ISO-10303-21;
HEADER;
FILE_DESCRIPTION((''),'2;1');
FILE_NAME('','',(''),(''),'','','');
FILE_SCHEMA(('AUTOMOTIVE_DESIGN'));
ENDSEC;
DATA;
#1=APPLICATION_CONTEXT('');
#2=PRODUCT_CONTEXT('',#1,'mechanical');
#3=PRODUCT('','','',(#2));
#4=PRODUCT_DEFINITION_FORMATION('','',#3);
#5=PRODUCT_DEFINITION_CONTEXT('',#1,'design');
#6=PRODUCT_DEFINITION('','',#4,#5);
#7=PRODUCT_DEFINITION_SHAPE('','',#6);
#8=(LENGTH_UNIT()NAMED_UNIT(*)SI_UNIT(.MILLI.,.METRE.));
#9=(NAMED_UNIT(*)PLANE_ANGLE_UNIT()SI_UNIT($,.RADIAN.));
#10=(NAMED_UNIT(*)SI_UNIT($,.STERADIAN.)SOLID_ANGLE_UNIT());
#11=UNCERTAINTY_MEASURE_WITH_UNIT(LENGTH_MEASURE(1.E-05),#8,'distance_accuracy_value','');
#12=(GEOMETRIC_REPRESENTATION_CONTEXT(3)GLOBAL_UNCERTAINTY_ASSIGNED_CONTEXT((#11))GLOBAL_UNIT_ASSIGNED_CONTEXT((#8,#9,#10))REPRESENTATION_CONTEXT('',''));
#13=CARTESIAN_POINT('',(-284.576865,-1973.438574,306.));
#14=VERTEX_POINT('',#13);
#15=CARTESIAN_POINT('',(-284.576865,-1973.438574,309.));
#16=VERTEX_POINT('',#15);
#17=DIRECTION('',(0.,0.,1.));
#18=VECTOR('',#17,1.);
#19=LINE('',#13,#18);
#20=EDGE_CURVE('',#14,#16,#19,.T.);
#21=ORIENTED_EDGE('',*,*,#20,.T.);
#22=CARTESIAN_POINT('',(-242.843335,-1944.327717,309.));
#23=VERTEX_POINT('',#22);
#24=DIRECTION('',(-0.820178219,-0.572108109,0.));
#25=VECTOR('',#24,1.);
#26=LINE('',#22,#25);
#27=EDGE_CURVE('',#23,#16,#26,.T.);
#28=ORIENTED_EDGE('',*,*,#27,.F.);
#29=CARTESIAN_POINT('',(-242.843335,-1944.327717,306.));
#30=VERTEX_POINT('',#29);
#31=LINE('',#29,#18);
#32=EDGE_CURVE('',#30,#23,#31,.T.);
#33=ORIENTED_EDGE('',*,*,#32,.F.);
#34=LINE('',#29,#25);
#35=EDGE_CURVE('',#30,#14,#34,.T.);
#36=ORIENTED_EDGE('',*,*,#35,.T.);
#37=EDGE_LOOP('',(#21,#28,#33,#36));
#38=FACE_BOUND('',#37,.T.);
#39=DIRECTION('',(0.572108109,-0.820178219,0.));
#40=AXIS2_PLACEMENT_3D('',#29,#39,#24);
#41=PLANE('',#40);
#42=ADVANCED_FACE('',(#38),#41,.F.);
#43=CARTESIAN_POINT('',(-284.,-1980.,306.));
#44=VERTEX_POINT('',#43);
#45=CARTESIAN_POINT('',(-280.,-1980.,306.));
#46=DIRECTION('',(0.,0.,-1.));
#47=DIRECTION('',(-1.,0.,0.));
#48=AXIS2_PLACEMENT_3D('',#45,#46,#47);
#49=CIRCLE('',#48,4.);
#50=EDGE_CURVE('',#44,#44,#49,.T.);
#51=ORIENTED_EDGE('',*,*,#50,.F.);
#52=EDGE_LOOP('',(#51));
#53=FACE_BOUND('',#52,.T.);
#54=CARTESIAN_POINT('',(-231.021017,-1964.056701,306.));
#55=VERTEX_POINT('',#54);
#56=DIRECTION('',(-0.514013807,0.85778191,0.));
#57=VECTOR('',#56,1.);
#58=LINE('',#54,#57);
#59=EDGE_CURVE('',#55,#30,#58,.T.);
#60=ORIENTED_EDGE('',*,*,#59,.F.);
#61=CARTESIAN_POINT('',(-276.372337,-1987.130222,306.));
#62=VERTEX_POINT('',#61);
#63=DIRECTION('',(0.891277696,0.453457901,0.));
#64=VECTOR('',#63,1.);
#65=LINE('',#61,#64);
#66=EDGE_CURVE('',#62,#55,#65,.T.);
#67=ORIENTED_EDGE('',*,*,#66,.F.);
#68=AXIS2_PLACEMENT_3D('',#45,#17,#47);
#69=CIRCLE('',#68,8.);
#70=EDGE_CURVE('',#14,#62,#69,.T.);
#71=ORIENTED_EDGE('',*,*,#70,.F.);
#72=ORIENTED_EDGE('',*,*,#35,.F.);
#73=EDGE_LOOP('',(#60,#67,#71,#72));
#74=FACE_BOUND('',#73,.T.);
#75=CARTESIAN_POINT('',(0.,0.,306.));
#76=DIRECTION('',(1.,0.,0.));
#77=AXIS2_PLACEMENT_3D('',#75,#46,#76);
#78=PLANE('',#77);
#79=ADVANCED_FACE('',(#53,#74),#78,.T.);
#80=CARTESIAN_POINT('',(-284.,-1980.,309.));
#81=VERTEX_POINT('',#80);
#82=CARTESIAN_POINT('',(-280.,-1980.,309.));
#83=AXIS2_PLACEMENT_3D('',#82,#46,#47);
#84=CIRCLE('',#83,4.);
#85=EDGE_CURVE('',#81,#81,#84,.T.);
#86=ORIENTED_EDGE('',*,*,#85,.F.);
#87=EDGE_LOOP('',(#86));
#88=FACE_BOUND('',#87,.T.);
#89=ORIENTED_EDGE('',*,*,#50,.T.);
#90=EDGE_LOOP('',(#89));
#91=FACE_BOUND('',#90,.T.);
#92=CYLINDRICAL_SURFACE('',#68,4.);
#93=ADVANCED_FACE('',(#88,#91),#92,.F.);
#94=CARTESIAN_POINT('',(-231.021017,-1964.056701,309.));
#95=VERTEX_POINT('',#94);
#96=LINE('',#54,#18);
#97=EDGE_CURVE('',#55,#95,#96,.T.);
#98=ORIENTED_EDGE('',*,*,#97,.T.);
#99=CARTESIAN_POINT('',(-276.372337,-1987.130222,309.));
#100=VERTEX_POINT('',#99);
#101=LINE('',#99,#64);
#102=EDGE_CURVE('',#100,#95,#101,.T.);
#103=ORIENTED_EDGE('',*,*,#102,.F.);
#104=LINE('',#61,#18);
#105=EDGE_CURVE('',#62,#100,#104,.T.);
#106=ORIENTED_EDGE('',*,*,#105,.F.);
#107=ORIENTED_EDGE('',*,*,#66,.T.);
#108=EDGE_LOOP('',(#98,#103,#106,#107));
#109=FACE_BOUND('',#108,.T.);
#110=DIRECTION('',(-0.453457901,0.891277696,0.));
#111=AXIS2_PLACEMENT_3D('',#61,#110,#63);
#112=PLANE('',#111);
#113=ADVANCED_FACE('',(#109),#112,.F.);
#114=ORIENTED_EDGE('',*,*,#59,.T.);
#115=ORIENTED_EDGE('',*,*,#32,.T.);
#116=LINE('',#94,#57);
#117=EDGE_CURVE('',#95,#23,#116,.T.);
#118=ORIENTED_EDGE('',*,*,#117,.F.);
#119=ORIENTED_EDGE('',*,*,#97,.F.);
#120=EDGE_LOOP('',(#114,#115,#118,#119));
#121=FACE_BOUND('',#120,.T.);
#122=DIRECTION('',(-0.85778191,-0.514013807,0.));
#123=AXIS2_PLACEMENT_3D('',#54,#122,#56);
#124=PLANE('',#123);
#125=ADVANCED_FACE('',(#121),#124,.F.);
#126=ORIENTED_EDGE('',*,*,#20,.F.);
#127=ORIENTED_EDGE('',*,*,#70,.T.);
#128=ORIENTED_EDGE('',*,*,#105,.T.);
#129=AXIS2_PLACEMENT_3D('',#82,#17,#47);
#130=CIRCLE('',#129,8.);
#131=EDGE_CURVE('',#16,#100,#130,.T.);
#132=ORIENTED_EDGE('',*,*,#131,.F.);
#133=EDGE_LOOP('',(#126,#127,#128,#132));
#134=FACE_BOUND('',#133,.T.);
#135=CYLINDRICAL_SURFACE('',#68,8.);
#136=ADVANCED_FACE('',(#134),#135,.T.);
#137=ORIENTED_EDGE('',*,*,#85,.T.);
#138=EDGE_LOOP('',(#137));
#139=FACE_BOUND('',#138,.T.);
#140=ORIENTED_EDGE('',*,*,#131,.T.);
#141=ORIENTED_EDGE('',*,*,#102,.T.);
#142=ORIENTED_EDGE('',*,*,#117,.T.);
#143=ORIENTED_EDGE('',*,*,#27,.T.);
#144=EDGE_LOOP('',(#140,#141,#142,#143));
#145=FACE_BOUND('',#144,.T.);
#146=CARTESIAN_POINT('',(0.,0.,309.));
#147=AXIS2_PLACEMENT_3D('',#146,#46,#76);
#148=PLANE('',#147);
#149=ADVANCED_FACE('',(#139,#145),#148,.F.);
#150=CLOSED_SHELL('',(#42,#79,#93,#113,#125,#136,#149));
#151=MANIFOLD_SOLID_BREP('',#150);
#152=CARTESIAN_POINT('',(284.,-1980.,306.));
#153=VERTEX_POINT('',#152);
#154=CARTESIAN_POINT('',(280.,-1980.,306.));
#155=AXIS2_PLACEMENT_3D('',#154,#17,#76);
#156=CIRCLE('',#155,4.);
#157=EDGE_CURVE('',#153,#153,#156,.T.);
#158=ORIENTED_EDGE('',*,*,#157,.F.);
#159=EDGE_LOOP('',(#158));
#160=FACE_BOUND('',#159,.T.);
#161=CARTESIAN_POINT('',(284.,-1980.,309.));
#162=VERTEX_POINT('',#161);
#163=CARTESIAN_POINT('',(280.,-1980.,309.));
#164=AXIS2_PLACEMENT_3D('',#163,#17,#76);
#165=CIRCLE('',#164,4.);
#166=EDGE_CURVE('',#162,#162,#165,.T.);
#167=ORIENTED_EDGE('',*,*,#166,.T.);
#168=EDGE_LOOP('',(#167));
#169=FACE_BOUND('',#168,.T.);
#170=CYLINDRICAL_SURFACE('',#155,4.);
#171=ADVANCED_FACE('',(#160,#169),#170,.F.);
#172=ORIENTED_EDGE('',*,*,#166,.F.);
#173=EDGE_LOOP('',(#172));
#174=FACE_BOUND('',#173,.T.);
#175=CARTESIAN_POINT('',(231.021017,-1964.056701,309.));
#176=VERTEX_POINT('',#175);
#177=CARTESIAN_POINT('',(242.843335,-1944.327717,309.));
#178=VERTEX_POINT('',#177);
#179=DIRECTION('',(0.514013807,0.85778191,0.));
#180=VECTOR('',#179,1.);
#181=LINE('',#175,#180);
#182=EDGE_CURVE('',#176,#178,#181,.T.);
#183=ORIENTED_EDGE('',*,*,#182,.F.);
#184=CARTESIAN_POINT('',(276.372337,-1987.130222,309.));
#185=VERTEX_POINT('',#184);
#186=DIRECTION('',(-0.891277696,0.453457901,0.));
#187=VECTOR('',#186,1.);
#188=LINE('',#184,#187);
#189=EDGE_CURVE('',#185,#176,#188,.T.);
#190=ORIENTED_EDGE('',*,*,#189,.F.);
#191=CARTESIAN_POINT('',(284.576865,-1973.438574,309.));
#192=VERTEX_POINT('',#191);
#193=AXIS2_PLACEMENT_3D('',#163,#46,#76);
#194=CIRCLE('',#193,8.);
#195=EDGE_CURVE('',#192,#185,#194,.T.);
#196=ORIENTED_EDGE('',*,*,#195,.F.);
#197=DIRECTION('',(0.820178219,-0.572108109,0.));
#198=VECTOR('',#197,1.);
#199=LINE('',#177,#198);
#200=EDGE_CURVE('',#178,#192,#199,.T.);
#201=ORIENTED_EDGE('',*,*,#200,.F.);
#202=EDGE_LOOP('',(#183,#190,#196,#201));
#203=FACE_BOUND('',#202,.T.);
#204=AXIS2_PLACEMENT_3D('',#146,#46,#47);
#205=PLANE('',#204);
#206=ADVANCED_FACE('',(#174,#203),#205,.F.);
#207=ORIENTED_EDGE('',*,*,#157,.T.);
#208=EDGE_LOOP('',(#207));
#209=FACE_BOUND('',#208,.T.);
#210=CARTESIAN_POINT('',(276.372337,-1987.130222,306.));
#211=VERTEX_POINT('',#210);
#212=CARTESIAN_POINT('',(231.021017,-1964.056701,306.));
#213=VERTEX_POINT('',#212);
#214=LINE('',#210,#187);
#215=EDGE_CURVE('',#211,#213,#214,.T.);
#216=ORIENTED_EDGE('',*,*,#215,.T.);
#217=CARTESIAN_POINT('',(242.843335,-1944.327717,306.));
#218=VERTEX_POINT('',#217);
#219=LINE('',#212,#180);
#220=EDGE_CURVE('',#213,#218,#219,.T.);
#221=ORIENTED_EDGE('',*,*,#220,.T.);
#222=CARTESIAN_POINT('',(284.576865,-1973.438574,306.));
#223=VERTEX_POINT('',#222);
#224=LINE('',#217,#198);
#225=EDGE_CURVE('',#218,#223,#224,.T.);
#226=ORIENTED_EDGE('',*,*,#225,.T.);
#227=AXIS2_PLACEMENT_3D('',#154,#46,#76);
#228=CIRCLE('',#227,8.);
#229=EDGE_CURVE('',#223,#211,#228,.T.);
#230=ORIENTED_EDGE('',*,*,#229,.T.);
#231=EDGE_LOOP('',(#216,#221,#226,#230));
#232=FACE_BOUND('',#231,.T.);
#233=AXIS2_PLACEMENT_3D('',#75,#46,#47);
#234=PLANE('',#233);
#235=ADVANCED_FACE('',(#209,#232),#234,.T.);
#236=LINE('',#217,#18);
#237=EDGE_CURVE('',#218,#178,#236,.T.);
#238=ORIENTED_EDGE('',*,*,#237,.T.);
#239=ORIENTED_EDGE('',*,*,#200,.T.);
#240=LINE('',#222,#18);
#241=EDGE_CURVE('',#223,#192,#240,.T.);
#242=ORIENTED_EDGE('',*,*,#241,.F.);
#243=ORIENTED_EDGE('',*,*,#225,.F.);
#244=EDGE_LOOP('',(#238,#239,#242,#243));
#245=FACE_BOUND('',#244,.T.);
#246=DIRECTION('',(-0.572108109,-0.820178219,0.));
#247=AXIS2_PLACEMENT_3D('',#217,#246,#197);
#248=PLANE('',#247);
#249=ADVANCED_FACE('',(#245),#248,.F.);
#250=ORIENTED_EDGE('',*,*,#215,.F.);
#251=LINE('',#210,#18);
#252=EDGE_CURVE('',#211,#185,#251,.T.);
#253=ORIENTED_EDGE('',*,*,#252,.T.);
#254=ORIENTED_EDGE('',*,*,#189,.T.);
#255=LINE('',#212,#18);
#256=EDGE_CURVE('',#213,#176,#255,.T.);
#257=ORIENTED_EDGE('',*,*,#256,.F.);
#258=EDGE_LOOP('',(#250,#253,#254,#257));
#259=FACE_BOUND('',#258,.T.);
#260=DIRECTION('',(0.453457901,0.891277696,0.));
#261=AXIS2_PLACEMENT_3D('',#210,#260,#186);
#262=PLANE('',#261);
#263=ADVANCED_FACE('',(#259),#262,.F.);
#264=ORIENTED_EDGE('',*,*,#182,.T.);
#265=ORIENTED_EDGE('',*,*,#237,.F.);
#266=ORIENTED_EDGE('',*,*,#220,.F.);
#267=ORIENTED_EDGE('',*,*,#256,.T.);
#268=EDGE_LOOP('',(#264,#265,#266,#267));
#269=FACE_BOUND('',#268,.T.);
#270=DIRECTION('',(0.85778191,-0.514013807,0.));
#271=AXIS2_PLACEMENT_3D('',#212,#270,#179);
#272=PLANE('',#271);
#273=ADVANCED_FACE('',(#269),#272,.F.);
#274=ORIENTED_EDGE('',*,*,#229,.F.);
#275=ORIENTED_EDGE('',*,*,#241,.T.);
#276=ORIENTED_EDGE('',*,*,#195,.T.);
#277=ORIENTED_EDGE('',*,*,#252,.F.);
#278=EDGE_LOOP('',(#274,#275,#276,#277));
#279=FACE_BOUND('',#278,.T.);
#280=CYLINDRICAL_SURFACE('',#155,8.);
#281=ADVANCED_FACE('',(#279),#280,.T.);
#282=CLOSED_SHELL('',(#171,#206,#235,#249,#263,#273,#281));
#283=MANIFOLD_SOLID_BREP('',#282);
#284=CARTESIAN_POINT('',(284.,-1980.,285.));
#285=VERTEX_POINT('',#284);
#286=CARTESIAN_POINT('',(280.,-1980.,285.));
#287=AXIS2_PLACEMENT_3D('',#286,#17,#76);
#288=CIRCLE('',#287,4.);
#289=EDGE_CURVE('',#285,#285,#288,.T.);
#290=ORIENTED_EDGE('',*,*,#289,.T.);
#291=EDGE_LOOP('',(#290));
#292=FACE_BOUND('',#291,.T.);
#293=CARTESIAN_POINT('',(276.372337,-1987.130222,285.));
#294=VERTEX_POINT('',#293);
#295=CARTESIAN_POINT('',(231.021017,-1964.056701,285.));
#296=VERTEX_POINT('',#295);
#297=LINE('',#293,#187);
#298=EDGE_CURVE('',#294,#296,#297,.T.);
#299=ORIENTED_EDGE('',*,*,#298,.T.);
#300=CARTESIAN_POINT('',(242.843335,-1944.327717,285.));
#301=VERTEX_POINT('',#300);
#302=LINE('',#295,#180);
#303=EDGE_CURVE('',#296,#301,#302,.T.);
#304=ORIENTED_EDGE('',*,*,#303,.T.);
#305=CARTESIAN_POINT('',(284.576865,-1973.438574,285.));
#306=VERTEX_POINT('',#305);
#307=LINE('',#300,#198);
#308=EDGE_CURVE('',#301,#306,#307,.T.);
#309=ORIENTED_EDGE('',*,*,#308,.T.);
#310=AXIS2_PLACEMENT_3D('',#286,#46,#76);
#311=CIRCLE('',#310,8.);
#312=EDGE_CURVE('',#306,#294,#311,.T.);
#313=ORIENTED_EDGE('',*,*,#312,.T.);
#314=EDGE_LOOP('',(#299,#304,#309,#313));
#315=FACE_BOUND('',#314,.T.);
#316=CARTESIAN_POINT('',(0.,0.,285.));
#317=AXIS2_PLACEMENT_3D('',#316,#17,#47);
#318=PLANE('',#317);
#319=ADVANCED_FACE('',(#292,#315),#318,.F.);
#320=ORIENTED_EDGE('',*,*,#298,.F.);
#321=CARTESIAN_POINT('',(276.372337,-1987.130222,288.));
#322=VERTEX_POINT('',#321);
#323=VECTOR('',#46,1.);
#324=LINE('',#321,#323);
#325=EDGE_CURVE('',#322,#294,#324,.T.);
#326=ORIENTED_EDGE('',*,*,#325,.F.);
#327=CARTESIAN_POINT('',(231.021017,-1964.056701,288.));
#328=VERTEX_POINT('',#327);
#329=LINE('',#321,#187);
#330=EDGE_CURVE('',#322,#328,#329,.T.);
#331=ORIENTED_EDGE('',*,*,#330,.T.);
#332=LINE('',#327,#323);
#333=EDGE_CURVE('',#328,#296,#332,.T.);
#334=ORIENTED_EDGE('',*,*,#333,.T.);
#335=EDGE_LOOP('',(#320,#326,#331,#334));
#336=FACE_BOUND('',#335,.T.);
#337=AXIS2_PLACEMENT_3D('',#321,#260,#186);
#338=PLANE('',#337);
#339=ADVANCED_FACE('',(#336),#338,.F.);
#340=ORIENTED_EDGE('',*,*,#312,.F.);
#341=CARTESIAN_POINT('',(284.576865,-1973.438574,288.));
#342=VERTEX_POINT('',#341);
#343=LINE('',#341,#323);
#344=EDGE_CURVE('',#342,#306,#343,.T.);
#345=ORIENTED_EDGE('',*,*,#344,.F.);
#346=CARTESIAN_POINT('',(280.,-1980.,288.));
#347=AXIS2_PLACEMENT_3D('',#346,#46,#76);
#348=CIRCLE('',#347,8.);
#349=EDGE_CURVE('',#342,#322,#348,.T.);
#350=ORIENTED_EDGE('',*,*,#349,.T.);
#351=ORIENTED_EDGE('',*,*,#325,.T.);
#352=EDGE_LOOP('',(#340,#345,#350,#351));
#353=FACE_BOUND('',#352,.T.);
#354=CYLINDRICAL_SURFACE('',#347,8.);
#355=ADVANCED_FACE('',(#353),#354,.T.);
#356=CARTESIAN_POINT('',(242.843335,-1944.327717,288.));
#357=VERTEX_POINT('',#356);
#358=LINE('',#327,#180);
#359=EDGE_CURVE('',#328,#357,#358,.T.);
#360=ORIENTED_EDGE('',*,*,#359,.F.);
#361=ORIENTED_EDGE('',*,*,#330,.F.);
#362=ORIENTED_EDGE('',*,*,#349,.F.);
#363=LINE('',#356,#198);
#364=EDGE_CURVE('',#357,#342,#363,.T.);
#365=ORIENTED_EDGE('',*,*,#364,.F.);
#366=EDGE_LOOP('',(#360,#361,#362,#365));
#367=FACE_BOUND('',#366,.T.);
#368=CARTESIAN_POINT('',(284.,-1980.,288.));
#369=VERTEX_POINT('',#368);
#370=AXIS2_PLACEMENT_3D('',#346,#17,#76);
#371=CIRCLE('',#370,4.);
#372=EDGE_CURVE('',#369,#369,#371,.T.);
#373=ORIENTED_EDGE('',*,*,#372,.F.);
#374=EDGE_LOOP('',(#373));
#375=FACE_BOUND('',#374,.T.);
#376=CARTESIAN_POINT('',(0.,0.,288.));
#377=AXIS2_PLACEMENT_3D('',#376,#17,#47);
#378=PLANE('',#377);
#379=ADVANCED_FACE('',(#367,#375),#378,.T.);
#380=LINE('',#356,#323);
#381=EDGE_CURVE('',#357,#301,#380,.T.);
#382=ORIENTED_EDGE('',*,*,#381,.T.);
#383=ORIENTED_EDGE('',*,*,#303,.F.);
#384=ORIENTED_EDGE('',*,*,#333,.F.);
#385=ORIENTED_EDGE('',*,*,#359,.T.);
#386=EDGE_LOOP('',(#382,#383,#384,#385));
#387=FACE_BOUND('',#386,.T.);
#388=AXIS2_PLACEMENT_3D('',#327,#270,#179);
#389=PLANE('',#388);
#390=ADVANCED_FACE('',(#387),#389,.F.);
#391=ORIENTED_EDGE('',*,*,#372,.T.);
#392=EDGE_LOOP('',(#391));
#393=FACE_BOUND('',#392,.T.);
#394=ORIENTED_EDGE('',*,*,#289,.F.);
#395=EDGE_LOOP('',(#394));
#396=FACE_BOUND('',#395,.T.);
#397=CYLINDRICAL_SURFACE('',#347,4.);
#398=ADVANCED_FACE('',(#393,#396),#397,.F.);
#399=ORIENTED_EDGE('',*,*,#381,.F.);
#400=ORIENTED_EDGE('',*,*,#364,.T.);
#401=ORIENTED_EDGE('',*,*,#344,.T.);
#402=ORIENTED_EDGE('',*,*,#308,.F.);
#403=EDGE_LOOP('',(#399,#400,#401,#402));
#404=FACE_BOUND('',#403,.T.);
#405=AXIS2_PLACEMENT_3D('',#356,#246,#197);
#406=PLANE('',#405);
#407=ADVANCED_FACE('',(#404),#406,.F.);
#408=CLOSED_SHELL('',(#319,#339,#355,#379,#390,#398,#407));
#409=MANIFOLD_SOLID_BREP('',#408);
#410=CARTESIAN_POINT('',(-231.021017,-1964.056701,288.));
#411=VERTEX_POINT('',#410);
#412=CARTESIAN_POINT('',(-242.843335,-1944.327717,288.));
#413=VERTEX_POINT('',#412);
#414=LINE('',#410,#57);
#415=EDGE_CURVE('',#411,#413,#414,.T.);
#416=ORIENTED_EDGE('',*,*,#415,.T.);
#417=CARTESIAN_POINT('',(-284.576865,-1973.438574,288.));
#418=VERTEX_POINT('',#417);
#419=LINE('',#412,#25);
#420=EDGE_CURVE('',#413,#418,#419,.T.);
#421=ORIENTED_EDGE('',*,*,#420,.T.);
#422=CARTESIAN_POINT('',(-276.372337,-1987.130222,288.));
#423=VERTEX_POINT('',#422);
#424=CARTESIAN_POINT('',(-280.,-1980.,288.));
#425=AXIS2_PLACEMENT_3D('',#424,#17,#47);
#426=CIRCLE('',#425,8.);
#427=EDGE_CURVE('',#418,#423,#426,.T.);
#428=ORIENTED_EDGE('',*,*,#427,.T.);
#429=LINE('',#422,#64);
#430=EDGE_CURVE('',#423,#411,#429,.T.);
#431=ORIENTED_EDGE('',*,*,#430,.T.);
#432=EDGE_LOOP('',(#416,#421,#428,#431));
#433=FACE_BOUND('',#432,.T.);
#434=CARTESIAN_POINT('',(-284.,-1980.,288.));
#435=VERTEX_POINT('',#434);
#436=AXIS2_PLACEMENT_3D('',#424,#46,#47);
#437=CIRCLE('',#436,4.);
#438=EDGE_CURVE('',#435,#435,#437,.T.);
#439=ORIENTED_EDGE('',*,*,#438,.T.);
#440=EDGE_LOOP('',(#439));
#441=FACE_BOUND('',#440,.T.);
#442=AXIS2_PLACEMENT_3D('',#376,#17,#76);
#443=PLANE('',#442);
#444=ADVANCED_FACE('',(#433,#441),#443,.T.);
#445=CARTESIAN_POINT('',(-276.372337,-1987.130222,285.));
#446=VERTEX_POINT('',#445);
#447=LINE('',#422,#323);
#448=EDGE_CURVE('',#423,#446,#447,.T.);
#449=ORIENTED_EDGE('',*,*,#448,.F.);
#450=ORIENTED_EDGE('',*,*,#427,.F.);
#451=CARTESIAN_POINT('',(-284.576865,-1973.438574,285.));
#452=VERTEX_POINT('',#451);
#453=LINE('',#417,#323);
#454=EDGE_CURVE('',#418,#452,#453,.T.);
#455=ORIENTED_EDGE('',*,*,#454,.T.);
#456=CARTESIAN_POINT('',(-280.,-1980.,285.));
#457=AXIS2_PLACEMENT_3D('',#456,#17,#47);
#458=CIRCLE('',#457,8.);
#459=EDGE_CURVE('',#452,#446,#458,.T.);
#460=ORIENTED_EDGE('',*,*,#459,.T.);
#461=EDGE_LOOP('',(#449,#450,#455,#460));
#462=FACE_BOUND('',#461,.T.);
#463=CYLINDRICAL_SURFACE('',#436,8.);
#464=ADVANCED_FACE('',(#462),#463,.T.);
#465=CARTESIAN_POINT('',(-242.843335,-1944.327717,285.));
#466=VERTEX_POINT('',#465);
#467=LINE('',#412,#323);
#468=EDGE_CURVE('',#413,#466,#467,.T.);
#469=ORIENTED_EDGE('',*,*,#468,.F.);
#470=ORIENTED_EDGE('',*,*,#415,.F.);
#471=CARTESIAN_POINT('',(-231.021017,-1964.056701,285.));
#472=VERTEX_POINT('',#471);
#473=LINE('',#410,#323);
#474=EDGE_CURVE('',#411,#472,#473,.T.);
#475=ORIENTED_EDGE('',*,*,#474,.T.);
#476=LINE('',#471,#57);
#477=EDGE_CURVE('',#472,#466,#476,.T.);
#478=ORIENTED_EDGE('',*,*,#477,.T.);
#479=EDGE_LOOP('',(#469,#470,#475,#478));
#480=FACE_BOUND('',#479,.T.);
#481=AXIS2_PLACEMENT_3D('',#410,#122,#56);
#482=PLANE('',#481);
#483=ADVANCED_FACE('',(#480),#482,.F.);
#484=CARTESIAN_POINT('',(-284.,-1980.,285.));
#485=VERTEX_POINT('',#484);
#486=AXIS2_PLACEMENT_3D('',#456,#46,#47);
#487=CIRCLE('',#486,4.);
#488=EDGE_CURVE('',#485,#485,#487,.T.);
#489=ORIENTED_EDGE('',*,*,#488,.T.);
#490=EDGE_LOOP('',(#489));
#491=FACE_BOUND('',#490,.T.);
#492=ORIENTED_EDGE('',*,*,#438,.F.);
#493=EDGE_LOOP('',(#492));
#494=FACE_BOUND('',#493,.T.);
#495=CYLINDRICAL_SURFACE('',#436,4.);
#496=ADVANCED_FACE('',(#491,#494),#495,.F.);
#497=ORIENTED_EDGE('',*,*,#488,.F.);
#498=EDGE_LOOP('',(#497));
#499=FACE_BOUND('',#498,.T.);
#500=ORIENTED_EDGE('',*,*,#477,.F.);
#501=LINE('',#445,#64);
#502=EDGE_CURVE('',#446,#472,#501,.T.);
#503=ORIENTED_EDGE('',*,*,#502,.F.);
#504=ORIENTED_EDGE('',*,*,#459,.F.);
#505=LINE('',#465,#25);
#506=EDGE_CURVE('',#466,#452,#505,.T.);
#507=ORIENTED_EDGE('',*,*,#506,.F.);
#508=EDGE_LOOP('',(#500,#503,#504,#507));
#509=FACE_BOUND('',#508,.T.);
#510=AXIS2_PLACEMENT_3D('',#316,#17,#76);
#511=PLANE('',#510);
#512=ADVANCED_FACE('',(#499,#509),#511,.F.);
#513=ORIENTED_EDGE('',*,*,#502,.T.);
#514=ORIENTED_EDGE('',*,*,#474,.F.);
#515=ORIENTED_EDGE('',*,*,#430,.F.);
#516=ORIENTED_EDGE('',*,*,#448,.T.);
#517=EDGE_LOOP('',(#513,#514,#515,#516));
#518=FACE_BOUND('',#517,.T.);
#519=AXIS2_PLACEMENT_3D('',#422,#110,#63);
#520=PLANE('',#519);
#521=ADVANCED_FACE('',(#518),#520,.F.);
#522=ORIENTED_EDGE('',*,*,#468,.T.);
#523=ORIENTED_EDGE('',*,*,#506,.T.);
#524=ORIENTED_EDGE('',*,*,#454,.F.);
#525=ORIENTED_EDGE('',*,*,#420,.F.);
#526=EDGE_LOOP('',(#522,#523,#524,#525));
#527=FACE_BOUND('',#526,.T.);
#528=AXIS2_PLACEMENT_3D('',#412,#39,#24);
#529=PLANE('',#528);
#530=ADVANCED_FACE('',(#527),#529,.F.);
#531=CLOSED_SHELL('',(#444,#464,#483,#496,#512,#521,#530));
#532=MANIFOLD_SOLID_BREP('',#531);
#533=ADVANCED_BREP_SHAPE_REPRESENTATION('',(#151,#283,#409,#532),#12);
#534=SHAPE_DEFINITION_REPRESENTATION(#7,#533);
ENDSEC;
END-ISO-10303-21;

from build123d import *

# Parameters (mm, degrees)
BOSS_EXTRUDE1_START     = 306
BOSS_EXTRUDE1_OUTLINE_R = 4
BOSS_EXTRUDE1_DEPTH     = 3


# Read off the part's stored shape, not the designer's step: Boss-Extrude1
with BuildPart() as part:
    # Boss-Extrude1 outline → Boss-Extrude1 (new body)
    with BuildSketch(Plane.XY.offset(BOSS_EXTRUDE1_START)):
        with BuildLine():
            Line((242.843334981, -1944.327717242), (231.021017413, -1964.056701182))
            Line((231.021017413, -1964.056701182), (276.372336791, -1987.13022157))
            ThreePointArc((276.372336791, -1987.13022157), (286.862255284, -1984.112110459), (284.576864871, -1973.438574244))
            Line((284.576864871, -1973.438574244), (242.843334981, -1944.327717242))
        make_face()
        with Locations((280, -1980)):
            Circle(BOSS_EXTRUDE1_OUTLINE_R, mode=Mode.SUBTRACT)
    extrude(amount=BOSS_EXTRUDE1_DEPTH)


with BuildPart() as body_2:
    # Mirror1: mirrored copy
    add(part.part.mirror(Plane(origin=(0, 0, 297), x_dir=(1, 0, 0), z_dir=(0, 0, -1))))


with BuildPart() as body_3:
    # Mirror2: mirrored copy
    add(part.part.mirror(Plane(origin=(0, 0, 0), x_dir=(0, 0, 1), z_dir=(1, 0, 0))))


with BuildPart() as body_4:
    # Mirror2 2: mirrored copy
    add(body_2.part.mirror(Plane(origin=(0, 0, 0), x_dir=(0, 0, 1), z_dir=(1, 0, 0))))


solid = Compound([part.part, body_2.part, body_3.part, body_4.part])
